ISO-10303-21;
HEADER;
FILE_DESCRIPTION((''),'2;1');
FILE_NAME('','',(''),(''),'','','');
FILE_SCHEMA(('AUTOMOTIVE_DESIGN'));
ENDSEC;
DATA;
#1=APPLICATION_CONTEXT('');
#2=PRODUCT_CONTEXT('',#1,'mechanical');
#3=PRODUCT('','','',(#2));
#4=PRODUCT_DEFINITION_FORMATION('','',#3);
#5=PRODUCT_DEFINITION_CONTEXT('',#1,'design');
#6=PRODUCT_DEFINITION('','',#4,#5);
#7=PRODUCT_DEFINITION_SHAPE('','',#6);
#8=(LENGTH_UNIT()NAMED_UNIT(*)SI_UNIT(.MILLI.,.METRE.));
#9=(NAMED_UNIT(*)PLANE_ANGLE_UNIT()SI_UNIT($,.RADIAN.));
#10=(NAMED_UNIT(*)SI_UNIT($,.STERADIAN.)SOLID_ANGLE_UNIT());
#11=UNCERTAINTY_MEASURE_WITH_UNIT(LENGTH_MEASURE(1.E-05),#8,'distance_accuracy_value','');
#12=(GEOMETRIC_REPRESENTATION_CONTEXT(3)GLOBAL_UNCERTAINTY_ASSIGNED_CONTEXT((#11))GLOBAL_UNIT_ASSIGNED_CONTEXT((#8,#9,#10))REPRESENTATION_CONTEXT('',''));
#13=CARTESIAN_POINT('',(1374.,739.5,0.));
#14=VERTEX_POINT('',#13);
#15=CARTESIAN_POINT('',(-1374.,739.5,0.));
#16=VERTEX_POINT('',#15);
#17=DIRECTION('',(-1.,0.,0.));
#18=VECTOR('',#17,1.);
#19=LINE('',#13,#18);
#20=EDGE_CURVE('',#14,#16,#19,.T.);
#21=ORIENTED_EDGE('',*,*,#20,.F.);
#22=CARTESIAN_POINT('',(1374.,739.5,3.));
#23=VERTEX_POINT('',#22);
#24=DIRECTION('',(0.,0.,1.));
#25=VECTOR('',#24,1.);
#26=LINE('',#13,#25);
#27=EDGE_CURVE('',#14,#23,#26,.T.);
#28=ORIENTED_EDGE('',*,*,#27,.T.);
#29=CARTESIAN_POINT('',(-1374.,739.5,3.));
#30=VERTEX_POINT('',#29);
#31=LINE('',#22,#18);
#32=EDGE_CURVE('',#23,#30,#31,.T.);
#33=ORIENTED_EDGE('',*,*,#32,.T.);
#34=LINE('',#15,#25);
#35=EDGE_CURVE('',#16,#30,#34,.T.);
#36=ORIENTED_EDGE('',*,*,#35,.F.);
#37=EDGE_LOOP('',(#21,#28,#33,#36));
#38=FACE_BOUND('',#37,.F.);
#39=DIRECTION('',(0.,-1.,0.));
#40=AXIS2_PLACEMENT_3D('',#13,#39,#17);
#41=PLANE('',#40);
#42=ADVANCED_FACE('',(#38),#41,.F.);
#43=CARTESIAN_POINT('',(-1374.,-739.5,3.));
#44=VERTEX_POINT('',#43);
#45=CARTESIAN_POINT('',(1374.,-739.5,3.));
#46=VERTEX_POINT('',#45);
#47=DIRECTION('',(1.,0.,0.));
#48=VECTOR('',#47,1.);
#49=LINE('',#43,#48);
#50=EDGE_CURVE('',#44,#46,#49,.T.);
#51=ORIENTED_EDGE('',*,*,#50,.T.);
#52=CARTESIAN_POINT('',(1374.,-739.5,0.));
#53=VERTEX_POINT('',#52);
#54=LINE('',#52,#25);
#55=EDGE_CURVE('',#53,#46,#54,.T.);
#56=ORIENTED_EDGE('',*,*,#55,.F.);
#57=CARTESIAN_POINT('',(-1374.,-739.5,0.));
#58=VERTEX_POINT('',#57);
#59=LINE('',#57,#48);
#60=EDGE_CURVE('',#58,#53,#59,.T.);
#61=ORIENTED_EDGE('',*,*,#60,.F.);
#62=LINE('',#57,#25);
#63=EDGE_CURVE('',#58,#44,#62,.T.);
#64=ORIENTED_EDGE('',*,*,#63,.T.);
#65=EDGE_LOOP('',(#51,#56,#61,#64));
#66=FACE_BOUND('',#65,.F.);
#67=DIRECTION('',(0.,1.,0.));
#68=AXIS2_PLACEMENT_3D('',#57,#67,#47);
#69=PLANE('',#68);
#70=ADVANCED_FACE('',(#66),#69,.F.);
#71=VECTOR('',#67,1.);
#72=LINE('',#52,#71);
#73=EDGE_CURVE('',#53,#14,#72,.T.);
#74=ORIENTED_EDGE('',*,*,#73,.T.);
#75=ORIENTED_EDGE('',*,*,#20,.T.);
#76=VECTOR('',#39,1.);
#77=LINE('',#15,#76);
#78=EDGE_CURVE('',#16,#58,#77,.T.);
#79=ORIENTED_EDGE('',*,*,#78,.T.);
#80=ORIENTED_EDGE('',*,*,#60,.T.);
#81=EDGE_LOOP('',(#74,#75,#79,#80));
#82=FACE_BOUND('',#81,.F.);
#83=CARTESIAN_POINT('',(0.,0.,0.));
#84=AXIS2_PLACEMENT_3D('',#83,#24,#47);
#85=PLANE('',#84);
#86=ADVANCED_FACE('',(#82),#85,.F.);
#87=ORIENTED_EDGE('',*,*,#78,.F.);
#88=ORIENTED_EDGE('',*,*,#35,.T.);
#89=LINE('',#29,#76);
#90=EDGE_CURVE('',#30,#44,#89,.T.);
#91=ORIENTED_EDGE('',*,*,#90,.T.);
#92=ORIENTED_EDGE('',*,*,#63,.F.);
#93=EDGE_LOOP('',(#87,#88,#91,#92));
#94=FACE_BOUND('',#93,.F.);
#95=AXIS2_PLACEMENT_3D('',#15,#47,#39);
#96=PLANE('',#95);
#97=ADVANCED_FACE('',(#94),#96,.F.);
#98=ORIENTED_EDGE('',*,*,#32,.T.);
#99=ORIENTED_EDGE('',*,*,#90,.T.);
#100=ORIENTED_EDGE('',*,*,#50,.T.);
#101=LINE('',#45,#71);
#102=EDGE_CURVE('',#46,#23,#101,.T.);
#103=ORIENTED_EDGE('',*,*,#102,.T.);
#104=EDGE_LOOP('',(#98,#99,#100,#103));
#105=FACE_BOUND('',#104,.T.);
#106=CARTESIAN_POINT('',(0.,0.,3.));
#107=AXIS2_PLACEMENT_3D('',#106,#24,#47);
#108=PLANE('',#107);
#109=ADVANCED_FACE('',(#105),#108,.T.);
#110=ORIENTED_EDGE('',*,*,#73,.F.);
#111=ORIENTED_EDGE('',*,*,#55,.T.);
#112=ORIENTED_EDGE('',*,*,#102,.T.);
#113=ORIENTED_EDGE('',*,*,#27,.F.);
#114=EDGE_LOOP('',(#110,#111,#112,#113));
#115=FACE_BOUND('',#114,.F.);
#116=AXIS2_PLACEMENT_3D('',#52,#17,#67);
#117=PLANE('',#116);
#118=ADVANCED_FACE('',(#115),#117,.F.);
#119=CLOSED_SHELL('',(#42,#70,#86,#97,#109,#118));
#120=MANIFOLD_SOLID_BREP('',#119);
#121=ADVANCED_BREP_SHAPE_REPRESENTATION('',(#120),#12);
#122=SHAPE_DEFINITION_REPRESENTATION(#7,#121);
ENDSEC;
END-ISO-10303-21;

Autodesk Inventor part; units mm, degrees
ref_plane "YZ Plane" through (0, 0, 0) normal (1, 0, 0) x (0, 1, 0)
ref_plane "XZ Plane" through (0, 0, 0) normal (0, 1, 0) x (-1, 0, 0)
ref_plane "XY Plane" through (0, 0, 0) normal (0, 0, 1) x (1, 0, 0)
sketch "Sketch1" plane through (0, 0, 0) normal (0, 0, 1) x (1, 0, 0)
  line L0 (-1374, -739.5) -> (1374, -739.5)
  line L1 (1374, -739.5) -> (1374, 739.5)
  line L2 (1374, 739.5) -> (-1374, 739.5)
  line L3 (-1374, 739.5) -> (-1374, -739.5)
  line L4 (-1374, -739.5) -> (1374, 739.5) construction
  line L5 (1374, -739.5) -> (-1374, 739.5) construction
  point P0 (0, 0)
  dimension "d0" = 2748
  dimension "d1" = 1479
extrude "Plate1" add sketch "Sketch1" along normal blind 3
sketch "Sketch5" plane through (0, 0, 3) normal (0, 0, 1) x (1, 0, 0)
  line L0 (1349, 714.5) -> (1349, 514.5) construction
  line L1 (1349, 514.5) -> (1334, 514.5) construction
  line L2 (1334, 514.5) -> (1334, 714.5) construction
  line L3 (1334, 714.5) -> (1349, 714.5) construction
  line L4 (1374, 739.5) -> (1374, -739.5) projected
  line L5 (-1374, 739.5) -> (1374, 739.5) projected
  point P0 (0, 0)
  dimension "d26" = 200
  dimension "d27" = 15
  dimension "d28" = 25
  dimension "d29" = 25
mark "Mark1"
equation "\"d2\" = Thickness"
equation "\"BendReliefWidth\" = Thickness"
equation "\"BendReliefDepth\" = 0.5 * Thickness"
equation "\"CornerReliefSize\" = 4 * Thickness"
equation "\"MinimumRemnant\" = 2 * Thickness"
equation "\"TransitionRadius\" = BendRadius"
equation "\"JacobiRadiusSize\" = BendRadius"
equation "\"GapSize\" = Thickness"
equation "\"Thickness\" = 3"
equation "\"BendRadius\" = 5"
properties part number "BSH 041 board" material "09g2s"
